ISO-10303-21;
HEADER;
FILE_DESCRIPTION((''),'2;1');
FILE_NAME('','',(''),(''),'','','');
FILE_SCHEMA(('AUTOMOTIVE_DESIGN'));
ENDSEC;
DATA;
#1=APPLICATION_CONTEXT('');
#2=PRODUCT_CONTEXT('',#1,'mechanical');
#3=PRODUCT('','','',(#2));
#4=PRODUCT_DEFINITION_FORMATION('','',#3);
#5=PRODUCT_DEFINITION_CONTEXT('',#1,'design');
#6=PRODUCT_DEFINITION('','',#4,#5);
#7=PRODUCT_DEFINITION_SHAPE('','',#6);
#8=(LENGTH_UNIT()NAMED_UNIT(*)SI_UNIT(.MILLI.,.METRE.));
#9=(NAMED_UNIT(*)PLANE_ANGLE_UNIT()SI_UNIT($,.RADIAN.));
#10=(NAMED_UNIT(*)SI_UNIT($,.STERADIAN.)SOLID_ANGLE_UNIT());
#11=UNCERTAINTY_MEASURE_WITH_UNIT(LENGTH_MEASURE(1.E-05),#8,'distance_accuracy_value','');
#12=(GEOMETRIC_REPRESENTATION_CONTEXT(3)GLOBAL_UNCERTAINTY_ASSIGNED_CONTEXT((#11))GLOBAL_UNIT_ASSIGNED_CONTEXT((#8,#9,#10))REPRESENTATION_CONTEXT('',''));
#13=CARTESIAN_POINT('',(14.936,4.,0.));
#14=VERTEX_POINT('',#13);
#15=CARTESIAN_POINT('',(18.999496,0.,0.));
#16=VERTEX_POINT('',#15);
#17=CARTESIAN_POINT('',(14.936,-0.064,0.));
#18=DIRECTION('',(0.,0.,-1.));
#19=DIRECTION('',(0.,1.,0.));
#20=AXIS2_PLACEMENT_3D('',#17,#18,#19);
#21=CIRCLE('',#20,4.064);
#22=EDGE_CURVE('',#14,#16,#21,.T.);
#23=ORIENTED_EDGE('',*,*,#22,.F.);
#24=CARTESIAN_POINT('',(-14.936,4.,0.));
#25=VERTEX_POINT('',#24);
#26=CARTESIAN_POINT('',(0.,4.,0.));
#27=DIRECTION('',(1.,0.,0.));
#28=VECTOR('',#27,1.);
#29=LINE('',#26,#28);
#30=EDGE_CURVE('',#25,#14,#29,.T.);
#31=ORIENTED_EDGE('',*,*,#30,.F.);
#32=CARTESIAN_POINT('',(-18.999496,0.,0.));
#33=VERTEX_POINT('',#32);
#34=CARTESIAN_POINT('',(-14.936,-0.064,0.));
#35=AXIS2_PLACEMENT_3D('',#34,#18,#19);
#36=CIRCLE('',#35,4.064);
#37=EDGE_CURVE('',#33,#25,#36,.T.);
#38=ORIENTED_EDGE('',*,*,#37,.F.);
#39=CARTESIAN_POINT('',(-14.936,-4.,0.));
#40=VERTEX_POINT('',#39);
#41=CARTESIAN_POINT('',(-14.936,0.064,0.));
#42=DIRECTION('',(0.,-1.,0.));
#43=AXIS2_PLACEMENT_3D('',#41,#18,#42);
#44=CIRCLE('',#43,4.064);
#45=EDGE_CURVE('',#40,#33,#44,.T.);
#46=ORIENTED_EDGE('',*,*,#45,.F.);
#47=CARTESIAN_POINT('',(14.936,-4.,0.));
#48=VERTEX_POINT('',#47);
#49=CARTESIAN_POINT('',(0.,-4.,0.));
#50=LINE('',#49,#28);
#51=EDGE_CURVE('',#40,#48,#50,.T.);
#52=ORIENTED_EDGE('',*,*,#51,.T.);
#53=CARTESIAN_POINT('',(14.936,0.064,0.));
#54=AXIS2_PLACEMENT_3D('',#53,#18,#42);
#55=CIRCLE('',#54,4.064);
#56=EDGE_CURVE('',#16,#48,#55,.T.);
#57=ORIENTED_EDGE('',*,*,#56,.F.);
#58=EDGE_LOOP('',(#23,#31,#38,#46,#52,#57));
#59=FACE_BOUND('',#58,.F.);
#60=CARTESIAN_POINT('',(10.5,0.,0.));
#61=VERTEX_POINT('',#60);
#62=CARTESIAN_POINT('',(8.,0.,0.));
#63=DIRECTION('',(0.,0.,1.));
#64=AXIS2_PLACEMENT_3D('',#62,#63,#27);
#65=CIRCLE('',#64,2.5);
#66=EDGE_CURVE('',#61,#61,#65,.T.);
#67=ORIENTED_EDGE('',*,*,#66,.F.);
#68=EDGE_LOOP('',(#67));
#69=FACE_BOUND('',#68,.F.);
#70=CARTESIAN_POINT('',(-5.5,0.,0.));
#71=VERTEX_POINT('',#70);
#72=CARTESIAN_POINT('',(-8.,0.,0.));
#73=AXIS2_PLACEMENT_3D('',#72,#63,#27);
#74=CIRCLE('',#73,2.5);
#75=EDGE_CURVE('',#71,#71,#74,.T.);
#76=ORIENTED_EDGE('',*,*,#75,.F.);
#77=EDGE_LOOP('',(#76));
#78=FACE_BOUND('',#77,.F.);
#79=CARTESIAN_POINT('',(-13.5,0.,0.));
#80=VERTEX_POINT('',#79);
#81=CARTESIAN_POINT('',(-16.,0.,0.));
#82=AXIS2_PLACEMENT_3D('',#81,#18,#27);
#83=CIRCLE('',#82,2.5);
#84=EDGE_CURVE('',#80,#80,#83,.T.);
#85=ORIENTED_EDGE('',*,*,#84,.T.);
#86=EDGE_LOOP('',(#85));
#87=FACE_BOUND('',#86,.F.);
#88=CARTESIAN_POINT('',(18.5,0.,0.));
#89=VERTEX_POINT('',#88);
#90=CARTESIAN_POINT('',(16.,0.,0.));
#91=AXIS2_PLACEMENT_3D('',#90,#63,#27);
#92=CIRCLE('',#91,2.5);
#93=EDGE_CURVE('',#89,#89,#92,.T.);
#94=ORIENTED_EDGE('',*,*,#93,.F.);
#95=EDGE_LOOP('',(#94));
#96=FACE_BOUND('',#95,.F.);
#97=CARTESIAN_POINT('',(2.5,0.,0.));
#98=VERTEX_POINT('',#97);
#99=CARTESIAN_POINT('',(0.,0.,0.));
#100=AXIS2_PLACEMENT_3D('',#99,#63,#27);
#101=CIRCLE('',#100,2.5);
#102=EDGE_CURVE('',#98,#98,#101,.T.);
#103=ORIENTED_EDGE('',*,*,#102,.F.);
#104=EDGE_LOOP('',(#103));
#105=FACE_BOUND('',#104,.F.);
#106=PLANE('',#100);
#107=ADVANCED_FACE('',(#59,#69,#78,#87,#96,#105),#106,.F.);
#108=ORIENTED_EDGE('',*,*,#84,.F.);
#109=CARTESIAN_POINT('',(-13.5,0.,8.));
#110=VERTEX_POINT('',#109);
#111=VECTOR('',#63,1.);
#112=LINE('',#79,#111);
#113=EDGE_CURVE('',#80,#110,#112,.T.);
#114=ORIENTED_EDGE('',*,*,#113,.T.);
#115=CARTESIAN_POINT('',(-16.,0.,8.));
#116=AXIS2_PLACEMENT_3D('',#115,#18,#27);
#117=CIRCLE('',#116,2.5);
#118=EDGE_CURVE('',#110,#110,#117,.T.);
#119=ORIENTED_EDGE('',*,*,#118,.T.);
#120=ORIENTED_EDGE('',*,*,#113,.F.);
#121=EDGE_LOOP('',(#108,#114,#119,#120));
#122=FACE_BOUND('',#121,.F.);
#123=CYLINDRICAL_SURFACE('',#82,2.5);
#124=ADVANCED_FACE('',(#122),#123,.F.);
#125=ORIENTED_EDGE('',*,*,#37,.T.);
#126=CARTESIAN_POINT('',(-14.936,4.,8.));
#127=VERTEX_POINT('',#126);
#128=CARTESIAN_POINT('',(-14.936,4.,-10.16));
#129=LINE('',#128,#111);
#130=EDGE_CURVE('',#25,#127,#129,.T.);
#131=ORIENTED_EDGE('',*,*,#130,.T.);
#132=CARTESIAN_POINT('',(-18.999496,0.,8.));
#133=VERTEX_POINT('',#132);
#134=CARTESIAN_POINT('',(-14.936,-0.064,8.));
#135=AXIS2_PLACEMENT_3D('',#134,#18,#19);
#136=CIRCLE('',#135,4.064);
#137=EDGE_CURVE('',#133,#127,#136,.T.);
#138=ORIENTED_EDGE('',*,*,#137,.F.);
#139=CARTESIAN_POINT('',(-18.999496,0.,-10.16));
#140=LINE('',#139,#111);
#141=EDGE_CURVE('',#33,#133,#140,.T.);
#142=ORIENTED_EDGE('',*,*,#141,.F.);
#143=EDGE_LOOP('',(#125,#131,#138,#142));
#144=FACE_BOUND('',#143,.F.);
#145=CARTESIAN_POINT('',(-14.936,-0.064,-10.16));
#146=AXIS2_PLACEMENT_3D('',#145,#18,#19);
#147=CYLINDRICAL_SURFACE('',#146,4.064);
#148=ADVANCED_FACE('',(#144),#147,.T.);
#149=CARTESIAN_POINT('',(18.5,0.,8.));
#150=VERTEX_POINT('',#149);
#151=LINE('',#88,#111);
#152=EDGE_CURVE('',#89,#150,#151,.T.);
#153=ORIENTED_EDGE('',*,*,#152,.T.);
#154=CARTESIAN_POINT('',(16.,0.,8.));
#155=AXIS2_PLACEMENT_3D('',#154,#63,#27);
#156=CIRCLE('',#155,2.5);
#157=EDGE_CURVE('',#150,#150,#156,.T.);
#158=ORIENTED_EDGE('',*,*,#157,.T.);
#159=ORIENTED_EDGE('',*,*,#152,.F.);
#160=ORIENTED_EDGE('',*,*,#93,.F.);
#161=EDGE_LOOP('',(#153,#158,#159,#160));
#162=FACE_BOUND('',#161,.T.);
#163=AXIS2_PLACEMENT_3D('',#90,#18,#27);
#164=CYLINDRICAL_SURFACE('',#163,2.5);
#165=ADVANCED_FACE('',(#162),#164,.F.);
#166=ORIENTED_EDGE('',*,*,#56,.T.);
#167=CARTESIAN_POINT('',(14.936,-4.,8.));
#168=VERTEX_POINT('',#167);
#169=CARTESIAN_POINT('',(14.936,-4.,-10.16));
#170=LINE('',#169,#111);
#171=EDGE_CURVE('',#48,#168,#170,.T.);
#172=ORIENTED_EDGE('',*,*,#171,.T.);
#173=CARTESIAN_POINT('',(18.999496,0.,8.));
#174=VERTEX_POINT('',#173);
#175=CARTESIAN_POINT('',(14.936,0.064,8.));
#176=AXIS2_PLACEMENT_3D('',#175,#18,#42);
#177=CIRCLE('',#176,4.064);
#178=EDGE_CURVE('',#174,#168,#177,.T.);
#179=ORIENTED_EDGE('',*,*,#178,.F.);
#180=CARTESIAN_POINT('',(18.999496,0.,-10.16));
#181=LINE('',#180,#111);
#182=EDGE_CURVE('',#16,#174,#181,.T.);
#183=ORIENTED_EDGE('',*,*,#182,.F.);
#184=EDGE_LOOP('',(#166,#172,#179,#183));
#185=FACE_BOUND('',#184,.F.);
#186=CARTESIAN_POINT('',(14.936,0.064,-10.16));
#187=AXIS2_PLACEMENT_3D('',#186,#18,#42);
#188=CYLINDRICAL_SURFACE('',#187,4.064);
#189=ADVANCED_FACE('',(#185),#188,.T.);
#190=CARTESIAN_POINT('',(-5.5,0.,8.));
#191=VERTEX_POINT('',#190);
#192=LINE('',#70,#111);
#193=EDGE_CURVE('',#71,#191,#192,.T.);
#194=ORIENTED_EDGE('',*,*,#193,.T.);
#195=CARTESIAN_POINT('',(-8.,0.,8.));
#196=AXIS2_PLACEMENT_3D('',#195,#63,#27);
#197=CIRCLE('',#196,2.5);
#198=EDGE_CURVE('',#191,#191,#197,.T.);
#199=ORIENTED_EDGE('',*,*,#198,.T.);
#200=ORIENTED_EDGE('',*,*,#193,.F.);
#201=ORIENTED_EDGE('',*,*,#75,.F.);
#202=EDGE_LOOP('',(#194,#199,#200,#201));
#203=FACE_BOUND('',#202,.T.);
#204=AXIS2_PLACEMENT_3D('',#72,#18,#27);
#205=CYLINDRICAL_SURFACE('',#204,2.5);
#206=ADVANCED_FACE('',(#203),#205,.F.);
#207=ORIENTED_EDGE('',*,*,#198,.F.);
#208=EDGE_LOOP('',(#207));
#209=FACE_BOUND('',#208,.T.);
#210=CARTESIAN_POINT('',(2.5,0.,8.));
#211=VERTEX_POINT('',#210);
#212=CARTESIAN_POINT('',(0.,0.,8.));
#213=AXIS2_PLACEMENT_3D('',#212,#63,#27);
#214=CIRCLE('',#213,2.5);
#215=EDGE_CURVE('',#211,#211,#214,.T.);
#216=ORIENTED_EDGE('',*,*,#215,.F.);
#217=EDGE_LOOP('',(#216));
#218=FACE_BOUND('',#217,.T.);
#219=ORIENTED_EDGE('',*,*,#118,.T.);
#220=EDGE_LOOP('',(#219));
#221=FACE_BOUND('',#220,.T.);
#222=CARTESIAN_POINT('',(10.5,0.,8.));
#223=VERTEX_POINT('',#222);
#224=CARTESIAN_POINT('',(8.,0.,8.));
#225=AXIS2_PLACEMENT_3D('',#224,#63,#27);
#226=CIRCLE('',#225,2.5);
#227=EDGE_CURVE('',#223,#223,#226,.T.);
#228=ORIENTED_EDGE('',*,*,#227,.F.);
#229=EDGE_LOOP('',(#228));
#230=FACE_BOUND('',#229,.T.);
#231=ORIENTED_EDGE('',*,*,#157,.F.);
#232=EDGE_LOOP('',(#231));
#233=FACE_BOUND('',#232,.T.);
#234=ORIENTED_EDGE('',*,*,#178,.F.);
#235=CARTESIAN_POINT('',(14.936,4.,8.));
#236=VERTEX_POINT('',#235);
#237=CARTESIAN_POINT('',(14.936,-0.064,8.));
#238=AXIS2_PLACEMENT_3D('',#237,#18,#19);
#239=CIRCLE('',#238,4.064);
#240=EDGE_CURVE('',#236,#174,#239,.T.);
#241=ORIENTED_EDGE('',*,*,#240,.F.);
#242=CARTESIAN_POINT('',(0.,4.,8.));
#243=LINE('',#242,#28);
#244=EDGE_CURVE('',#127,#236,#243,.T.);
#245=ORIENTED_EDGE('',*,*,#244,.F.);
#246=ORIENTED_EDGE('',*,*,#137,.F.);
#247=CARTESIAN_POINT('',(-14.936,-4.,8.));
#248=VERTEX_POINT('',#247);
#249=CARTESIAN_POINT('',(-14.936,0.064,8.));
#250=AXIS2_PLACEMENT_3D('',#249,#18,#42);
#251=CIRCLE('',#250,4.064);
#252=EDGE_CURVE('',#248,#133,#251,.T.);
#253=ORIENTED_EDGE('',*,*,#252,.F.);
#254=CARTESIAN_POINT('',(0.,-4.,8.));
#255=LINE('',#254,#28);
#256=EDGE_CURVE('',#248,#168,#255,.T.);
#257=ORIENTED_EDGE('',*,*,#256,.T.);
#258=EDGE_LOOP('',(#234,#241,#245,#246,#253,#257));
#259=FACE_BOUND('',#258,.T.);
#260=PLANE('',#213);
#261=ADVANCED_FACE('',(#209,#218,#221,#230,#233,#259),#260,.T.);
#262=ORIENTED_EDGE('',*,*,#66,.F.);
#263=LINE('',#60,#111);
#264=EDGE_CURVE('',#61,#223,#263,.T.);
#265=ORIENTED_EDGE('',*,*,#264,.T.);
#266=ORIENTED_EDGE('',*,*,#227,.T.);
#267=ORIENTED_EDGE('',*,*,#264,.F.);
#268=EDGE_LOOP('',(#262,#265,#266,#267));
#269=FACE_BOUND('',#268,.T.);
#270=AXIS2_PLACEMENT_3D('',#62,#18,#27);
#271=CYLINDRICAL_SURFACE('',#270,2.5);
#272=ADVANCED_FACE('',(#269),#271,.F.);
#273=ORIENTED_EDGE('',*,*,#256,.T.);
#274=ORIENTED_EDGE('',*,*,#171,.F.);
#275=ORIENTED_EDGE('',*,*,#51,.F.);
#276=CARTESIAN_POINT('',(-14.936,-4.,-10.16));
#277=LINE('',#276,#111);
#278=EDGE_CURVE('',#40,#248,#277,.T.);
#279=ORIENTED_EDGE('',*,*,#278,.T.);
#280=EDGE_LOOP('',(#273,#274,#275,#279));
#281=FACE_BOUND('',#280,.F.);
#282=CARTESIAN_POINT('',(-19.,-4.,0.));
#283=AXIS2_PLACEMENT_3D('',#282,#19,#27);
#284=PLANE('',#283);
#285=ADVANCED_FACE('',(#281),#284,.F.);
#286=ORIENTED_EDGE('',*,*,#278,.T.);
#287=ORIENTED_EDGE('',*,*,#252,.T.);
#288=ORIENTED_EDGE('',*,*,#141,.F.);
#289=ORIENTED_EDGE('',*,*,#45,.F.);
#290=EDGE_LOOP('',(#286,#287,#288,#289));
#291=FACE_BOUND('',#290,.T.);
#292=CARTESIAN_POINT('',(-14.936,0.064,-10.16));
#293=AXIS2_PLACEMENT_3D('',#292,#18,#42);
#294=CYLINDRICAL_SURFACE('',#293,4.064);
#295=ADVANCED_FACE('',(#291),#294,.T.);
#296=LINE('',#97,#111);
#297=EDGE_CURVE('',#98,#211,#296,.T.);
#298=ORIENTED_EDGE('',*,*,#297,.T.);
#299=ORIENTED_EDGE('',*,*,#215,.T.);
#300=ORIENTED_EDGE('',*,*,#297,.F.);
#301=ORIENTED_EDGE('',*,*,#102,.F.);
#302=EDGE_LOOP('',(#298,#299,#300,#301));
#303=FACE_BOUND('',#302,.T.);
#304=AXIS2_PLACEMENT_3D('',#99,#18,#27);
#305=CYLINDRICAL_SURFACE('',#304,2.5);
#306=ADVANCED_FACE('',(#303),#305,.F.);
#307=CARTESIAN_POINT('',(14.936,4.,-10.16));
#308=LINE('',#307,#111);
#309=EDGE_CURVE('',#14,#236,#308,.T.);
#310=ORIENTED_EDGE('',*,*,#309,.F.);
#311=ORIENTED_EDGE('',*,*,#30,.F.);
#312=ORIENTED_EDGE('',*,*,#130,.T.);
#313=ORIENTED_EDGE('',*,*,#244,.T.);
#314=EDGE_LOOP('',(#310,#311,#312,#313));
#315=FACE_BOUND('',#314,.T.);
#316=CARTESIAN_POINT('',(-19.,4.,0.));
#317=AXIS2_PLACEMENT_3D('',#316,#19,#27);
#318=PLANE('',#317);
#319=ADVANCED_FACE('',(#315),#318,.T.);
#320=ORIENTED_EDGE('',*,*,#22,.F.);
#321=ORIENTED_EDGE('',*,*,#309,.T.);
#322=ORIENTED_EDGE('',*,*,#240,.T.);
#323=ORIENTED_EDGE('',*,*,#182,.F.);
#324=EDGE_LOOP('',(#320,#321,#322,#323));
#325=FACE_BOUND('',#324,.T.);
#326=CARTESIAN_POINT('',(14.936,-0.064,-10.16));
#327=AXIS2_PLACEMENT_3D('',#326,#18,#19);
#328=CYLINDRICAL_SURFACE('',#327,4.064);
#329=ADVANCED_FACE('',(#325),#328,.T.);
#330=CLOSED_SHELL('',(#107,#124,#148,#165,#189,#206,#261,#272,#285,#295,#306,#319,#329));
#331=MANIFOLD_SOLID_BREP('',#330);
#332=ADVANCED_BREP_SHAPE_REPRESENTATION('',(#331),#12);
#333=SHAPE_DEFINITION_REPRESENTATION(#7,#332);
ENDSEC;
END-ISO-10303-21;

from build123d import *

# Parameters (mm, degrees)
F0_W        = 38
F0_H        = 8
F0_R        = 2.5
F1_DEPTH    = 8
F2_T1_DEPTH = 28.32


# Not quite as in the source:
# - a fillet or chamfer that OpenCascade refuses, or shapes differently, is made with other operations: its cross-section is extruded or revolved along the edge and cut away or added


with BuildPart() as f1:
    # F0 (on Top) → F1 (new body)
    with BuildSketch(Plane.XY):
        Rectangle(F0_W, F0_H)
        with BuildLine():
            ThreePointArc((-18.5, 0), (-16, 2.5), (-13.5, 0))
            ThreePointArc((-13.5, 0), (-16, -2.5), (-18.5, 0))
        make_face(mode=Mode.SUBTRACT)
        with Locations((-8, 0)):
            Circle(F0_R, mode=Mode.SUBTRACT)
        Circle(F0_R, mode=Mode.SUBTRACT)
        with Locations((8, 0)):
            Circle(F0_R, mode=Mode.SUBTRACT)
        with Locations((16, 0)):
            Circle(F0_R, mode=Mode.SUBTRACT)
    extrude(amount=F1_DEPTH)

    # F2: fillet of radius 4.064 on 4 edges, made by hand

    # F2_s2 → F2_t1 (cut)
    with BuildSketch(Plane.XY.offset(-10.16)):
        with BuildLine():
            ThreePointArc((14.936, -4), (17.8096819587, -2.8096819587), (19, 0.064))
            Line((19, 0.064), (19, -4))
            Line((19, -4), (14.936, -4))
        make_face()
        with BuildLine():
            ThreePointArc((14.936, 4), (17.8096819587, 2.8096819587), (19, -0.064))
            Line((19, -0.064), (19, 4))
            Line((19, 4), (14.936, 4))
        make_face()
        with BuildLine():
            ThreePointArc((-14.936, -4), (-17.8096819587, -2.8096819587), (-19, 0.064))
            Line((-19, 0.064), (-19, -4))
            Line((-19, -4), (-14.936, -4))
        make_face()
        with BuildLine():
            ThreePointArc((-14.936, 4), (-17.8096819587, 2.8096819587), (-19, -0.064))
            Line((-19, -0.064), (-19, 4))
            Line((-19, 4), (-14.936, 4))
        make_face()
    extrude(amount=F2_T1_DEPTH, mode=Mode.SUBTRACT)


solid = f1.part
